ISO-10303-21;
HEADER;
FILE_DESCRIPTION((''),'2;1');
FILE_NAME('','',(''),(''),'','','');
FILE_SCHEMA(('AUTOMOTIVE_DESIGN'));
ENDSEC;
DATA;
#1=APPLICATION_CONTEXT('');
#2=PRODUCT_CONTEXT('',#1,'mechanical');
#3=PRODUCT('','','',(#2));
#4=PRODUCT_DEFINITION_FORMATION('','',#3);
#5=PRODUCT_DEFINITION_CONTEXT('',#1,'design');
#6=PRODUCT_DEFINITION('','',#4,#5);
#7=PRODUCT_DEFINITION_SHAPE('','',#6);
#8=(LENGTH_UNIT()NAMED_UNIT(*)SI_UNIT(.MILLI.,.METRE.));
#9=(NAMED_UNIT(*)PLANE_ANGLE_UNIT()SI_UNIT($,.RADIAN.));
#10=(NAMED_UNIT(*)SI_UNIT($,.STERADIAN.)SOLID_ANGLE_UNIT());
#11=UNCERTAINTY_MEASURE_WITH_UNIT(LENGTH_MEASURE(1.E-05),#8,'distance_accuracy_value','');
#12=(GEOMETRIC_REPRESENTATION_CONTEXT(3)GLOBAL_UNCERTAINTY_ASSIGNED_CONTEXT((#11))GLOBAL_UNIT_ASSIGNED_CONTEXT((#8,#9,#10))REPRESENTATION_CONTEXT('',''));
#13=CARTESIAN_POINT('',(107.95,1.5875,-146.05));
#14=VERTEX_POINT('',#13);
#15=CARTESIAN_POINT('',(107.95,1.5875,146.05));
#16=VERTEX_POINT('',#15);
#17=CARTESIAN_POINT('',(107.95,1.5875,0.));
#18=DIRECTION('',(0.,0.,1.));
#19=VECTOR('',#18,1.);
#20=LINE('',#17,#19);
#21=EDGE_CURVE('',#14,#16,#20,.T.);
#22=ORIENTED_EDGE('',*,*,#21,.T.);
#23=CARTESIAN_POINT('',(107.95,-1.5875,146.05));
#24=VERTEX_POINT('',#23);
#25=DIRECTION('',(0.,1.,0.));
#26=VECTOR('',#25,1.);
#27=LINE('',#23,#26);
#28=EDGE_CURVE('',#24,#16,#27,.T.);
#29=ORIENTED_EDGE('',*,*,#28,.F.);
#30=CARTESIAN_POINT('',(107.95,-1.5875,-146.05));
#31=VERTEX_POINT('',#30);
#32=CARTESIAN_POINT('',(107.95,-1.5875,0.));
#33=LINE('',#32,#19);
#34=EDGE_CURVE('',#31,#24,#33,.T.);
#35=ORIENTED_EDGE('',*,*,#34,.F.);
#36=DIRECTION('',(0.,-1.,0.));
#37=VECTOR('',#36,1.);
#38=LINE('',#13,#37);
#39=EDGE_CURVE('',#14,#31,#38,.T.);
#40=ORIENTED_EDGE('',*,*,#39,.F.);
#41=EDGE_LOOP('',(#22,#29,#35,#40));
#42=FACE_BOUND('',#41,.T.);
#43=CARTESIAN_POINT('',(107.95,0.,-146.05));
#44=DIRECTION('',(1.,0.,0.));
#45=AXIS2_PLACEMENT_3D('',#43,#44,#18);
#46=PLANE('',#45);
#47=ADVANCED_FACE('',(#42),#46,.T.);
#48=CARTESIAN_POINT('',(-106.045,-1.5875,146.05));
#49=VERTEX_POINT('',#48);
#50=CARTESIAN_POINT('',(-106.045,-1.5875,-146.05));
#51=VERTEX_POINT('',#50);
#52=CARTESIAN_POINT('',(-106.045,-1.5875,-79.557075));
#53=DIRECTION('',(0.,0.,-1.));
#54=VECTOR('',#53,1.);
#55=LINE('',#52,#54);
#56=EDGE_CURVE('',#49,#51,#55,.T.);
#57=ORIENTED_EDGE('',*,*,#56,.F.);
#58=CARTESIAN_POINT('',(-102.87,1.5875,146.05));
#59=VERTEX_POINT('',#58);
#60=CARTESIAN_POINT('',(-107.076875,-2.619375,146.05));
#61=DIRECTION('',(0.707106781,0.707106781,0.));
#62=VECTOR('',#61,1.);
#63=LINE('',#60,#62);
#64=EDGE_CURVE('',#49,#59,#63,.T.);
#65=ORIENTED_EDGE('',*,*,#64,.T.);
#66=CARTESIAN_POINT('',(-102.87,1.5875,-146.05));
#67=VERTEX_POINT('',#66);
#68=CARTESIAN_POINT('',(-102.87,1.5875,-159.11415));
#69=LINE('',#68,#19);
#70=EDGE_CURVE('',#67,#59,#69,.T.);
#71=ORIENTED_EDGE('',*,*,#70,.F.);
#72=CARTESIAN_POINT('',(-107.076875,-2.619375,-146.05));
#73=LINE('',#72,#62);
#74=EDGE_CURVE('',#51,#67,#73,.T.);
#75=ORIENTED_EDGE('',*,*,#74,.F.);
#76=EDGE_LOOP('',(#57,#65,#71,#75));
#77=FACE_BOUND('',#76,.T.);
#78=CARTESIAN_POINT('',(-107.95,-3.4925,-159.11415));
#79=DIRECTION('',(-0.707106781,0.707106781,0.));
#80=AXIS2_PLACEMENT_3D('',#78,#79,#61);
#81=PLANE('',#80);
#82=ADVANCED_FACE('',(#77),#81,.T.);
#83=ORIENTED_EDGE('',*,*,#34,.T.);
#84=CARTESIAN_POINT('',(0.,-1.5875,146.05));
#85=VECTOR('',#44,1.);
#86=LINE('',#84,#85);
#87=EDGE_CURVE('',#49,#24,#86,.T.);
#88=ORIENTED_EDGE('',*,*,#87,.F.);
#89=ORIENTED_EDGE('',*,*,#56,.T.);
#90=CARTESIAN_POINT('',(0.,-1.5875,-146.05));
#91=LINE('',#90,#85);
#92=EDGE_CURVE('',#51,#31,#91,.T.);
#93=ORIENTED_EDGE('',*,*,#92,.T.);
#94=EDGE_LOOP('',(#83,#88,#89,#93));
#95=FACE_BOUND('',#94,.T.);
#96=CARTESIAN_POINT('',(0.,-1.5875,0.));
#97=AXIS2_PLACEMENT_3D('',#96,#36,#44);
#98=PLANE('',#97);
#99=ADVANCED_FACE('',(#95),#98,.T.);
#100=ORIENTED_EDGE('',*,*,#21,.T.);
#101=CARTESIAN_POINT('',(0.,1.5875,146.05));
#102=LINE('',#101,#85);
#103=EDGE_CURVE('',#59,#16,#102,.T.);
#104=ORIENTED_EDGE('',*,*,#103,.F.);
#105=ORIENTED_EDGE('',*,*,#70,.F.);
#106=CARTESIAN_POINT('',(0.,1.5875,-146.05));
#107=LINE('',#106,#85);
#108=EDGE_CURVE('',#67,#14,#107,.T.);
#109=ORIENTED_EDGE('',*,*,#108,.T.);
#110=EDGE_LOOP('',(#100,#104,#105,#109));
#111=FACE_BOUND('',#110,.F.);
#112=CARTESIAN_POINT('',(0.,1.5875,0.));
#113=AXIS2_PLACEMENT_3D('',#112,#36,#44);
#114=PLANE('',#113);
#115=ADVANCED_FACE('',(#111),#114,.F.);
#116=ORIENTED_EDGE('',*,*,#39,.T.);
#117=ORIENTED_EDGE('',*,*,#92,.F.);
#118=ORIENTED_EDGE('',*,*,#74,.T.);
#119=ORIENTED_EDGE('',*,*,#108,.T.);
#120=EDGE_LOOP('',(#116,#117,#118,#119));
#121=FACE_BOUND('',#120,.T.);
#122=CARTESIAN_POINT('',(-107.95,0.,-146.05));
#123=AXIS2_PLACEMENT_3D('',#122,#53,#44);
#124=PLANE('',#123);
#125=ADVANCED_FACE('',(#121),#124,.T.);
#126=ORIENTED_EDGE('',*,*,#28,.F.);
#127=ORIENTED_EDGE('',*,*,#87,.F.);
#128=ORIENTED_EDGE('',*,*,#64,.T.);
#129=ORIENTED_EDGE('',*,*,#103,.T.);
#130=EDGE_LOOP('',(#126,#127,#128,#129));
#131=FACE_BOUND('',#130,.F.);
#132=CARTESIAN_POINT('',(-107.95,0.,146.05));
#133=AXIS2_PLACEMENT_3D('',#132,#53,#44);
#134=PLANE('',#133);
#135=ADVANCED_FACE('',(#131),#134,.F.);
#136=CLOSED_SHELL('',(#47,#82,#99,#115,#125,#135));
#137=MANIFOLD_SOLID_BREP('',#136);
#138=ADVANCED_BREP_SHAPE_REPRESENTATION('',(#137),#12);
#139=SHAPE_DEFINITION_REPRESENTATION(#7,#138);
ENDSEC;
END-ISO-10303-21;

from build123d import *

# Parameters (mm, degrees)
F0_W        = 215.9
F0_H        = 292.1
F1_DEPTH    = 1.5875
F2_T1_DEPTH = 318.2282991577


# Not quite as in the source:
# - a fillet or chamfer that OpenCascade refuses, or shapes differently, is made with other operations: its cross-section is extruded or revolved along the edge and cut away or added


with BuildPart() as f1:
    # F0 (on Front) → F1 (new body, symmetric)
    with BuildSketch(Plane.XZ):
        Rectangle(F0_W, F0_H)
    extrude(amount=F1_DEPTH, both=True)

    # F2: chamfer of 5.08 on 1 edges, made by hand

    # F2_s2 → F2_t1 (cut)
    with BuildSketch(Plane.XY.offset(-159.1141495789)):
        Polygon((-107.95, -3.4925), (-102.87, 1.5875), (-107.95, 1.5875), align=None)
    extrude(amount=F2_T1_DEPTH, mode=Mode.SUBTRACT)


solid = f1.part
